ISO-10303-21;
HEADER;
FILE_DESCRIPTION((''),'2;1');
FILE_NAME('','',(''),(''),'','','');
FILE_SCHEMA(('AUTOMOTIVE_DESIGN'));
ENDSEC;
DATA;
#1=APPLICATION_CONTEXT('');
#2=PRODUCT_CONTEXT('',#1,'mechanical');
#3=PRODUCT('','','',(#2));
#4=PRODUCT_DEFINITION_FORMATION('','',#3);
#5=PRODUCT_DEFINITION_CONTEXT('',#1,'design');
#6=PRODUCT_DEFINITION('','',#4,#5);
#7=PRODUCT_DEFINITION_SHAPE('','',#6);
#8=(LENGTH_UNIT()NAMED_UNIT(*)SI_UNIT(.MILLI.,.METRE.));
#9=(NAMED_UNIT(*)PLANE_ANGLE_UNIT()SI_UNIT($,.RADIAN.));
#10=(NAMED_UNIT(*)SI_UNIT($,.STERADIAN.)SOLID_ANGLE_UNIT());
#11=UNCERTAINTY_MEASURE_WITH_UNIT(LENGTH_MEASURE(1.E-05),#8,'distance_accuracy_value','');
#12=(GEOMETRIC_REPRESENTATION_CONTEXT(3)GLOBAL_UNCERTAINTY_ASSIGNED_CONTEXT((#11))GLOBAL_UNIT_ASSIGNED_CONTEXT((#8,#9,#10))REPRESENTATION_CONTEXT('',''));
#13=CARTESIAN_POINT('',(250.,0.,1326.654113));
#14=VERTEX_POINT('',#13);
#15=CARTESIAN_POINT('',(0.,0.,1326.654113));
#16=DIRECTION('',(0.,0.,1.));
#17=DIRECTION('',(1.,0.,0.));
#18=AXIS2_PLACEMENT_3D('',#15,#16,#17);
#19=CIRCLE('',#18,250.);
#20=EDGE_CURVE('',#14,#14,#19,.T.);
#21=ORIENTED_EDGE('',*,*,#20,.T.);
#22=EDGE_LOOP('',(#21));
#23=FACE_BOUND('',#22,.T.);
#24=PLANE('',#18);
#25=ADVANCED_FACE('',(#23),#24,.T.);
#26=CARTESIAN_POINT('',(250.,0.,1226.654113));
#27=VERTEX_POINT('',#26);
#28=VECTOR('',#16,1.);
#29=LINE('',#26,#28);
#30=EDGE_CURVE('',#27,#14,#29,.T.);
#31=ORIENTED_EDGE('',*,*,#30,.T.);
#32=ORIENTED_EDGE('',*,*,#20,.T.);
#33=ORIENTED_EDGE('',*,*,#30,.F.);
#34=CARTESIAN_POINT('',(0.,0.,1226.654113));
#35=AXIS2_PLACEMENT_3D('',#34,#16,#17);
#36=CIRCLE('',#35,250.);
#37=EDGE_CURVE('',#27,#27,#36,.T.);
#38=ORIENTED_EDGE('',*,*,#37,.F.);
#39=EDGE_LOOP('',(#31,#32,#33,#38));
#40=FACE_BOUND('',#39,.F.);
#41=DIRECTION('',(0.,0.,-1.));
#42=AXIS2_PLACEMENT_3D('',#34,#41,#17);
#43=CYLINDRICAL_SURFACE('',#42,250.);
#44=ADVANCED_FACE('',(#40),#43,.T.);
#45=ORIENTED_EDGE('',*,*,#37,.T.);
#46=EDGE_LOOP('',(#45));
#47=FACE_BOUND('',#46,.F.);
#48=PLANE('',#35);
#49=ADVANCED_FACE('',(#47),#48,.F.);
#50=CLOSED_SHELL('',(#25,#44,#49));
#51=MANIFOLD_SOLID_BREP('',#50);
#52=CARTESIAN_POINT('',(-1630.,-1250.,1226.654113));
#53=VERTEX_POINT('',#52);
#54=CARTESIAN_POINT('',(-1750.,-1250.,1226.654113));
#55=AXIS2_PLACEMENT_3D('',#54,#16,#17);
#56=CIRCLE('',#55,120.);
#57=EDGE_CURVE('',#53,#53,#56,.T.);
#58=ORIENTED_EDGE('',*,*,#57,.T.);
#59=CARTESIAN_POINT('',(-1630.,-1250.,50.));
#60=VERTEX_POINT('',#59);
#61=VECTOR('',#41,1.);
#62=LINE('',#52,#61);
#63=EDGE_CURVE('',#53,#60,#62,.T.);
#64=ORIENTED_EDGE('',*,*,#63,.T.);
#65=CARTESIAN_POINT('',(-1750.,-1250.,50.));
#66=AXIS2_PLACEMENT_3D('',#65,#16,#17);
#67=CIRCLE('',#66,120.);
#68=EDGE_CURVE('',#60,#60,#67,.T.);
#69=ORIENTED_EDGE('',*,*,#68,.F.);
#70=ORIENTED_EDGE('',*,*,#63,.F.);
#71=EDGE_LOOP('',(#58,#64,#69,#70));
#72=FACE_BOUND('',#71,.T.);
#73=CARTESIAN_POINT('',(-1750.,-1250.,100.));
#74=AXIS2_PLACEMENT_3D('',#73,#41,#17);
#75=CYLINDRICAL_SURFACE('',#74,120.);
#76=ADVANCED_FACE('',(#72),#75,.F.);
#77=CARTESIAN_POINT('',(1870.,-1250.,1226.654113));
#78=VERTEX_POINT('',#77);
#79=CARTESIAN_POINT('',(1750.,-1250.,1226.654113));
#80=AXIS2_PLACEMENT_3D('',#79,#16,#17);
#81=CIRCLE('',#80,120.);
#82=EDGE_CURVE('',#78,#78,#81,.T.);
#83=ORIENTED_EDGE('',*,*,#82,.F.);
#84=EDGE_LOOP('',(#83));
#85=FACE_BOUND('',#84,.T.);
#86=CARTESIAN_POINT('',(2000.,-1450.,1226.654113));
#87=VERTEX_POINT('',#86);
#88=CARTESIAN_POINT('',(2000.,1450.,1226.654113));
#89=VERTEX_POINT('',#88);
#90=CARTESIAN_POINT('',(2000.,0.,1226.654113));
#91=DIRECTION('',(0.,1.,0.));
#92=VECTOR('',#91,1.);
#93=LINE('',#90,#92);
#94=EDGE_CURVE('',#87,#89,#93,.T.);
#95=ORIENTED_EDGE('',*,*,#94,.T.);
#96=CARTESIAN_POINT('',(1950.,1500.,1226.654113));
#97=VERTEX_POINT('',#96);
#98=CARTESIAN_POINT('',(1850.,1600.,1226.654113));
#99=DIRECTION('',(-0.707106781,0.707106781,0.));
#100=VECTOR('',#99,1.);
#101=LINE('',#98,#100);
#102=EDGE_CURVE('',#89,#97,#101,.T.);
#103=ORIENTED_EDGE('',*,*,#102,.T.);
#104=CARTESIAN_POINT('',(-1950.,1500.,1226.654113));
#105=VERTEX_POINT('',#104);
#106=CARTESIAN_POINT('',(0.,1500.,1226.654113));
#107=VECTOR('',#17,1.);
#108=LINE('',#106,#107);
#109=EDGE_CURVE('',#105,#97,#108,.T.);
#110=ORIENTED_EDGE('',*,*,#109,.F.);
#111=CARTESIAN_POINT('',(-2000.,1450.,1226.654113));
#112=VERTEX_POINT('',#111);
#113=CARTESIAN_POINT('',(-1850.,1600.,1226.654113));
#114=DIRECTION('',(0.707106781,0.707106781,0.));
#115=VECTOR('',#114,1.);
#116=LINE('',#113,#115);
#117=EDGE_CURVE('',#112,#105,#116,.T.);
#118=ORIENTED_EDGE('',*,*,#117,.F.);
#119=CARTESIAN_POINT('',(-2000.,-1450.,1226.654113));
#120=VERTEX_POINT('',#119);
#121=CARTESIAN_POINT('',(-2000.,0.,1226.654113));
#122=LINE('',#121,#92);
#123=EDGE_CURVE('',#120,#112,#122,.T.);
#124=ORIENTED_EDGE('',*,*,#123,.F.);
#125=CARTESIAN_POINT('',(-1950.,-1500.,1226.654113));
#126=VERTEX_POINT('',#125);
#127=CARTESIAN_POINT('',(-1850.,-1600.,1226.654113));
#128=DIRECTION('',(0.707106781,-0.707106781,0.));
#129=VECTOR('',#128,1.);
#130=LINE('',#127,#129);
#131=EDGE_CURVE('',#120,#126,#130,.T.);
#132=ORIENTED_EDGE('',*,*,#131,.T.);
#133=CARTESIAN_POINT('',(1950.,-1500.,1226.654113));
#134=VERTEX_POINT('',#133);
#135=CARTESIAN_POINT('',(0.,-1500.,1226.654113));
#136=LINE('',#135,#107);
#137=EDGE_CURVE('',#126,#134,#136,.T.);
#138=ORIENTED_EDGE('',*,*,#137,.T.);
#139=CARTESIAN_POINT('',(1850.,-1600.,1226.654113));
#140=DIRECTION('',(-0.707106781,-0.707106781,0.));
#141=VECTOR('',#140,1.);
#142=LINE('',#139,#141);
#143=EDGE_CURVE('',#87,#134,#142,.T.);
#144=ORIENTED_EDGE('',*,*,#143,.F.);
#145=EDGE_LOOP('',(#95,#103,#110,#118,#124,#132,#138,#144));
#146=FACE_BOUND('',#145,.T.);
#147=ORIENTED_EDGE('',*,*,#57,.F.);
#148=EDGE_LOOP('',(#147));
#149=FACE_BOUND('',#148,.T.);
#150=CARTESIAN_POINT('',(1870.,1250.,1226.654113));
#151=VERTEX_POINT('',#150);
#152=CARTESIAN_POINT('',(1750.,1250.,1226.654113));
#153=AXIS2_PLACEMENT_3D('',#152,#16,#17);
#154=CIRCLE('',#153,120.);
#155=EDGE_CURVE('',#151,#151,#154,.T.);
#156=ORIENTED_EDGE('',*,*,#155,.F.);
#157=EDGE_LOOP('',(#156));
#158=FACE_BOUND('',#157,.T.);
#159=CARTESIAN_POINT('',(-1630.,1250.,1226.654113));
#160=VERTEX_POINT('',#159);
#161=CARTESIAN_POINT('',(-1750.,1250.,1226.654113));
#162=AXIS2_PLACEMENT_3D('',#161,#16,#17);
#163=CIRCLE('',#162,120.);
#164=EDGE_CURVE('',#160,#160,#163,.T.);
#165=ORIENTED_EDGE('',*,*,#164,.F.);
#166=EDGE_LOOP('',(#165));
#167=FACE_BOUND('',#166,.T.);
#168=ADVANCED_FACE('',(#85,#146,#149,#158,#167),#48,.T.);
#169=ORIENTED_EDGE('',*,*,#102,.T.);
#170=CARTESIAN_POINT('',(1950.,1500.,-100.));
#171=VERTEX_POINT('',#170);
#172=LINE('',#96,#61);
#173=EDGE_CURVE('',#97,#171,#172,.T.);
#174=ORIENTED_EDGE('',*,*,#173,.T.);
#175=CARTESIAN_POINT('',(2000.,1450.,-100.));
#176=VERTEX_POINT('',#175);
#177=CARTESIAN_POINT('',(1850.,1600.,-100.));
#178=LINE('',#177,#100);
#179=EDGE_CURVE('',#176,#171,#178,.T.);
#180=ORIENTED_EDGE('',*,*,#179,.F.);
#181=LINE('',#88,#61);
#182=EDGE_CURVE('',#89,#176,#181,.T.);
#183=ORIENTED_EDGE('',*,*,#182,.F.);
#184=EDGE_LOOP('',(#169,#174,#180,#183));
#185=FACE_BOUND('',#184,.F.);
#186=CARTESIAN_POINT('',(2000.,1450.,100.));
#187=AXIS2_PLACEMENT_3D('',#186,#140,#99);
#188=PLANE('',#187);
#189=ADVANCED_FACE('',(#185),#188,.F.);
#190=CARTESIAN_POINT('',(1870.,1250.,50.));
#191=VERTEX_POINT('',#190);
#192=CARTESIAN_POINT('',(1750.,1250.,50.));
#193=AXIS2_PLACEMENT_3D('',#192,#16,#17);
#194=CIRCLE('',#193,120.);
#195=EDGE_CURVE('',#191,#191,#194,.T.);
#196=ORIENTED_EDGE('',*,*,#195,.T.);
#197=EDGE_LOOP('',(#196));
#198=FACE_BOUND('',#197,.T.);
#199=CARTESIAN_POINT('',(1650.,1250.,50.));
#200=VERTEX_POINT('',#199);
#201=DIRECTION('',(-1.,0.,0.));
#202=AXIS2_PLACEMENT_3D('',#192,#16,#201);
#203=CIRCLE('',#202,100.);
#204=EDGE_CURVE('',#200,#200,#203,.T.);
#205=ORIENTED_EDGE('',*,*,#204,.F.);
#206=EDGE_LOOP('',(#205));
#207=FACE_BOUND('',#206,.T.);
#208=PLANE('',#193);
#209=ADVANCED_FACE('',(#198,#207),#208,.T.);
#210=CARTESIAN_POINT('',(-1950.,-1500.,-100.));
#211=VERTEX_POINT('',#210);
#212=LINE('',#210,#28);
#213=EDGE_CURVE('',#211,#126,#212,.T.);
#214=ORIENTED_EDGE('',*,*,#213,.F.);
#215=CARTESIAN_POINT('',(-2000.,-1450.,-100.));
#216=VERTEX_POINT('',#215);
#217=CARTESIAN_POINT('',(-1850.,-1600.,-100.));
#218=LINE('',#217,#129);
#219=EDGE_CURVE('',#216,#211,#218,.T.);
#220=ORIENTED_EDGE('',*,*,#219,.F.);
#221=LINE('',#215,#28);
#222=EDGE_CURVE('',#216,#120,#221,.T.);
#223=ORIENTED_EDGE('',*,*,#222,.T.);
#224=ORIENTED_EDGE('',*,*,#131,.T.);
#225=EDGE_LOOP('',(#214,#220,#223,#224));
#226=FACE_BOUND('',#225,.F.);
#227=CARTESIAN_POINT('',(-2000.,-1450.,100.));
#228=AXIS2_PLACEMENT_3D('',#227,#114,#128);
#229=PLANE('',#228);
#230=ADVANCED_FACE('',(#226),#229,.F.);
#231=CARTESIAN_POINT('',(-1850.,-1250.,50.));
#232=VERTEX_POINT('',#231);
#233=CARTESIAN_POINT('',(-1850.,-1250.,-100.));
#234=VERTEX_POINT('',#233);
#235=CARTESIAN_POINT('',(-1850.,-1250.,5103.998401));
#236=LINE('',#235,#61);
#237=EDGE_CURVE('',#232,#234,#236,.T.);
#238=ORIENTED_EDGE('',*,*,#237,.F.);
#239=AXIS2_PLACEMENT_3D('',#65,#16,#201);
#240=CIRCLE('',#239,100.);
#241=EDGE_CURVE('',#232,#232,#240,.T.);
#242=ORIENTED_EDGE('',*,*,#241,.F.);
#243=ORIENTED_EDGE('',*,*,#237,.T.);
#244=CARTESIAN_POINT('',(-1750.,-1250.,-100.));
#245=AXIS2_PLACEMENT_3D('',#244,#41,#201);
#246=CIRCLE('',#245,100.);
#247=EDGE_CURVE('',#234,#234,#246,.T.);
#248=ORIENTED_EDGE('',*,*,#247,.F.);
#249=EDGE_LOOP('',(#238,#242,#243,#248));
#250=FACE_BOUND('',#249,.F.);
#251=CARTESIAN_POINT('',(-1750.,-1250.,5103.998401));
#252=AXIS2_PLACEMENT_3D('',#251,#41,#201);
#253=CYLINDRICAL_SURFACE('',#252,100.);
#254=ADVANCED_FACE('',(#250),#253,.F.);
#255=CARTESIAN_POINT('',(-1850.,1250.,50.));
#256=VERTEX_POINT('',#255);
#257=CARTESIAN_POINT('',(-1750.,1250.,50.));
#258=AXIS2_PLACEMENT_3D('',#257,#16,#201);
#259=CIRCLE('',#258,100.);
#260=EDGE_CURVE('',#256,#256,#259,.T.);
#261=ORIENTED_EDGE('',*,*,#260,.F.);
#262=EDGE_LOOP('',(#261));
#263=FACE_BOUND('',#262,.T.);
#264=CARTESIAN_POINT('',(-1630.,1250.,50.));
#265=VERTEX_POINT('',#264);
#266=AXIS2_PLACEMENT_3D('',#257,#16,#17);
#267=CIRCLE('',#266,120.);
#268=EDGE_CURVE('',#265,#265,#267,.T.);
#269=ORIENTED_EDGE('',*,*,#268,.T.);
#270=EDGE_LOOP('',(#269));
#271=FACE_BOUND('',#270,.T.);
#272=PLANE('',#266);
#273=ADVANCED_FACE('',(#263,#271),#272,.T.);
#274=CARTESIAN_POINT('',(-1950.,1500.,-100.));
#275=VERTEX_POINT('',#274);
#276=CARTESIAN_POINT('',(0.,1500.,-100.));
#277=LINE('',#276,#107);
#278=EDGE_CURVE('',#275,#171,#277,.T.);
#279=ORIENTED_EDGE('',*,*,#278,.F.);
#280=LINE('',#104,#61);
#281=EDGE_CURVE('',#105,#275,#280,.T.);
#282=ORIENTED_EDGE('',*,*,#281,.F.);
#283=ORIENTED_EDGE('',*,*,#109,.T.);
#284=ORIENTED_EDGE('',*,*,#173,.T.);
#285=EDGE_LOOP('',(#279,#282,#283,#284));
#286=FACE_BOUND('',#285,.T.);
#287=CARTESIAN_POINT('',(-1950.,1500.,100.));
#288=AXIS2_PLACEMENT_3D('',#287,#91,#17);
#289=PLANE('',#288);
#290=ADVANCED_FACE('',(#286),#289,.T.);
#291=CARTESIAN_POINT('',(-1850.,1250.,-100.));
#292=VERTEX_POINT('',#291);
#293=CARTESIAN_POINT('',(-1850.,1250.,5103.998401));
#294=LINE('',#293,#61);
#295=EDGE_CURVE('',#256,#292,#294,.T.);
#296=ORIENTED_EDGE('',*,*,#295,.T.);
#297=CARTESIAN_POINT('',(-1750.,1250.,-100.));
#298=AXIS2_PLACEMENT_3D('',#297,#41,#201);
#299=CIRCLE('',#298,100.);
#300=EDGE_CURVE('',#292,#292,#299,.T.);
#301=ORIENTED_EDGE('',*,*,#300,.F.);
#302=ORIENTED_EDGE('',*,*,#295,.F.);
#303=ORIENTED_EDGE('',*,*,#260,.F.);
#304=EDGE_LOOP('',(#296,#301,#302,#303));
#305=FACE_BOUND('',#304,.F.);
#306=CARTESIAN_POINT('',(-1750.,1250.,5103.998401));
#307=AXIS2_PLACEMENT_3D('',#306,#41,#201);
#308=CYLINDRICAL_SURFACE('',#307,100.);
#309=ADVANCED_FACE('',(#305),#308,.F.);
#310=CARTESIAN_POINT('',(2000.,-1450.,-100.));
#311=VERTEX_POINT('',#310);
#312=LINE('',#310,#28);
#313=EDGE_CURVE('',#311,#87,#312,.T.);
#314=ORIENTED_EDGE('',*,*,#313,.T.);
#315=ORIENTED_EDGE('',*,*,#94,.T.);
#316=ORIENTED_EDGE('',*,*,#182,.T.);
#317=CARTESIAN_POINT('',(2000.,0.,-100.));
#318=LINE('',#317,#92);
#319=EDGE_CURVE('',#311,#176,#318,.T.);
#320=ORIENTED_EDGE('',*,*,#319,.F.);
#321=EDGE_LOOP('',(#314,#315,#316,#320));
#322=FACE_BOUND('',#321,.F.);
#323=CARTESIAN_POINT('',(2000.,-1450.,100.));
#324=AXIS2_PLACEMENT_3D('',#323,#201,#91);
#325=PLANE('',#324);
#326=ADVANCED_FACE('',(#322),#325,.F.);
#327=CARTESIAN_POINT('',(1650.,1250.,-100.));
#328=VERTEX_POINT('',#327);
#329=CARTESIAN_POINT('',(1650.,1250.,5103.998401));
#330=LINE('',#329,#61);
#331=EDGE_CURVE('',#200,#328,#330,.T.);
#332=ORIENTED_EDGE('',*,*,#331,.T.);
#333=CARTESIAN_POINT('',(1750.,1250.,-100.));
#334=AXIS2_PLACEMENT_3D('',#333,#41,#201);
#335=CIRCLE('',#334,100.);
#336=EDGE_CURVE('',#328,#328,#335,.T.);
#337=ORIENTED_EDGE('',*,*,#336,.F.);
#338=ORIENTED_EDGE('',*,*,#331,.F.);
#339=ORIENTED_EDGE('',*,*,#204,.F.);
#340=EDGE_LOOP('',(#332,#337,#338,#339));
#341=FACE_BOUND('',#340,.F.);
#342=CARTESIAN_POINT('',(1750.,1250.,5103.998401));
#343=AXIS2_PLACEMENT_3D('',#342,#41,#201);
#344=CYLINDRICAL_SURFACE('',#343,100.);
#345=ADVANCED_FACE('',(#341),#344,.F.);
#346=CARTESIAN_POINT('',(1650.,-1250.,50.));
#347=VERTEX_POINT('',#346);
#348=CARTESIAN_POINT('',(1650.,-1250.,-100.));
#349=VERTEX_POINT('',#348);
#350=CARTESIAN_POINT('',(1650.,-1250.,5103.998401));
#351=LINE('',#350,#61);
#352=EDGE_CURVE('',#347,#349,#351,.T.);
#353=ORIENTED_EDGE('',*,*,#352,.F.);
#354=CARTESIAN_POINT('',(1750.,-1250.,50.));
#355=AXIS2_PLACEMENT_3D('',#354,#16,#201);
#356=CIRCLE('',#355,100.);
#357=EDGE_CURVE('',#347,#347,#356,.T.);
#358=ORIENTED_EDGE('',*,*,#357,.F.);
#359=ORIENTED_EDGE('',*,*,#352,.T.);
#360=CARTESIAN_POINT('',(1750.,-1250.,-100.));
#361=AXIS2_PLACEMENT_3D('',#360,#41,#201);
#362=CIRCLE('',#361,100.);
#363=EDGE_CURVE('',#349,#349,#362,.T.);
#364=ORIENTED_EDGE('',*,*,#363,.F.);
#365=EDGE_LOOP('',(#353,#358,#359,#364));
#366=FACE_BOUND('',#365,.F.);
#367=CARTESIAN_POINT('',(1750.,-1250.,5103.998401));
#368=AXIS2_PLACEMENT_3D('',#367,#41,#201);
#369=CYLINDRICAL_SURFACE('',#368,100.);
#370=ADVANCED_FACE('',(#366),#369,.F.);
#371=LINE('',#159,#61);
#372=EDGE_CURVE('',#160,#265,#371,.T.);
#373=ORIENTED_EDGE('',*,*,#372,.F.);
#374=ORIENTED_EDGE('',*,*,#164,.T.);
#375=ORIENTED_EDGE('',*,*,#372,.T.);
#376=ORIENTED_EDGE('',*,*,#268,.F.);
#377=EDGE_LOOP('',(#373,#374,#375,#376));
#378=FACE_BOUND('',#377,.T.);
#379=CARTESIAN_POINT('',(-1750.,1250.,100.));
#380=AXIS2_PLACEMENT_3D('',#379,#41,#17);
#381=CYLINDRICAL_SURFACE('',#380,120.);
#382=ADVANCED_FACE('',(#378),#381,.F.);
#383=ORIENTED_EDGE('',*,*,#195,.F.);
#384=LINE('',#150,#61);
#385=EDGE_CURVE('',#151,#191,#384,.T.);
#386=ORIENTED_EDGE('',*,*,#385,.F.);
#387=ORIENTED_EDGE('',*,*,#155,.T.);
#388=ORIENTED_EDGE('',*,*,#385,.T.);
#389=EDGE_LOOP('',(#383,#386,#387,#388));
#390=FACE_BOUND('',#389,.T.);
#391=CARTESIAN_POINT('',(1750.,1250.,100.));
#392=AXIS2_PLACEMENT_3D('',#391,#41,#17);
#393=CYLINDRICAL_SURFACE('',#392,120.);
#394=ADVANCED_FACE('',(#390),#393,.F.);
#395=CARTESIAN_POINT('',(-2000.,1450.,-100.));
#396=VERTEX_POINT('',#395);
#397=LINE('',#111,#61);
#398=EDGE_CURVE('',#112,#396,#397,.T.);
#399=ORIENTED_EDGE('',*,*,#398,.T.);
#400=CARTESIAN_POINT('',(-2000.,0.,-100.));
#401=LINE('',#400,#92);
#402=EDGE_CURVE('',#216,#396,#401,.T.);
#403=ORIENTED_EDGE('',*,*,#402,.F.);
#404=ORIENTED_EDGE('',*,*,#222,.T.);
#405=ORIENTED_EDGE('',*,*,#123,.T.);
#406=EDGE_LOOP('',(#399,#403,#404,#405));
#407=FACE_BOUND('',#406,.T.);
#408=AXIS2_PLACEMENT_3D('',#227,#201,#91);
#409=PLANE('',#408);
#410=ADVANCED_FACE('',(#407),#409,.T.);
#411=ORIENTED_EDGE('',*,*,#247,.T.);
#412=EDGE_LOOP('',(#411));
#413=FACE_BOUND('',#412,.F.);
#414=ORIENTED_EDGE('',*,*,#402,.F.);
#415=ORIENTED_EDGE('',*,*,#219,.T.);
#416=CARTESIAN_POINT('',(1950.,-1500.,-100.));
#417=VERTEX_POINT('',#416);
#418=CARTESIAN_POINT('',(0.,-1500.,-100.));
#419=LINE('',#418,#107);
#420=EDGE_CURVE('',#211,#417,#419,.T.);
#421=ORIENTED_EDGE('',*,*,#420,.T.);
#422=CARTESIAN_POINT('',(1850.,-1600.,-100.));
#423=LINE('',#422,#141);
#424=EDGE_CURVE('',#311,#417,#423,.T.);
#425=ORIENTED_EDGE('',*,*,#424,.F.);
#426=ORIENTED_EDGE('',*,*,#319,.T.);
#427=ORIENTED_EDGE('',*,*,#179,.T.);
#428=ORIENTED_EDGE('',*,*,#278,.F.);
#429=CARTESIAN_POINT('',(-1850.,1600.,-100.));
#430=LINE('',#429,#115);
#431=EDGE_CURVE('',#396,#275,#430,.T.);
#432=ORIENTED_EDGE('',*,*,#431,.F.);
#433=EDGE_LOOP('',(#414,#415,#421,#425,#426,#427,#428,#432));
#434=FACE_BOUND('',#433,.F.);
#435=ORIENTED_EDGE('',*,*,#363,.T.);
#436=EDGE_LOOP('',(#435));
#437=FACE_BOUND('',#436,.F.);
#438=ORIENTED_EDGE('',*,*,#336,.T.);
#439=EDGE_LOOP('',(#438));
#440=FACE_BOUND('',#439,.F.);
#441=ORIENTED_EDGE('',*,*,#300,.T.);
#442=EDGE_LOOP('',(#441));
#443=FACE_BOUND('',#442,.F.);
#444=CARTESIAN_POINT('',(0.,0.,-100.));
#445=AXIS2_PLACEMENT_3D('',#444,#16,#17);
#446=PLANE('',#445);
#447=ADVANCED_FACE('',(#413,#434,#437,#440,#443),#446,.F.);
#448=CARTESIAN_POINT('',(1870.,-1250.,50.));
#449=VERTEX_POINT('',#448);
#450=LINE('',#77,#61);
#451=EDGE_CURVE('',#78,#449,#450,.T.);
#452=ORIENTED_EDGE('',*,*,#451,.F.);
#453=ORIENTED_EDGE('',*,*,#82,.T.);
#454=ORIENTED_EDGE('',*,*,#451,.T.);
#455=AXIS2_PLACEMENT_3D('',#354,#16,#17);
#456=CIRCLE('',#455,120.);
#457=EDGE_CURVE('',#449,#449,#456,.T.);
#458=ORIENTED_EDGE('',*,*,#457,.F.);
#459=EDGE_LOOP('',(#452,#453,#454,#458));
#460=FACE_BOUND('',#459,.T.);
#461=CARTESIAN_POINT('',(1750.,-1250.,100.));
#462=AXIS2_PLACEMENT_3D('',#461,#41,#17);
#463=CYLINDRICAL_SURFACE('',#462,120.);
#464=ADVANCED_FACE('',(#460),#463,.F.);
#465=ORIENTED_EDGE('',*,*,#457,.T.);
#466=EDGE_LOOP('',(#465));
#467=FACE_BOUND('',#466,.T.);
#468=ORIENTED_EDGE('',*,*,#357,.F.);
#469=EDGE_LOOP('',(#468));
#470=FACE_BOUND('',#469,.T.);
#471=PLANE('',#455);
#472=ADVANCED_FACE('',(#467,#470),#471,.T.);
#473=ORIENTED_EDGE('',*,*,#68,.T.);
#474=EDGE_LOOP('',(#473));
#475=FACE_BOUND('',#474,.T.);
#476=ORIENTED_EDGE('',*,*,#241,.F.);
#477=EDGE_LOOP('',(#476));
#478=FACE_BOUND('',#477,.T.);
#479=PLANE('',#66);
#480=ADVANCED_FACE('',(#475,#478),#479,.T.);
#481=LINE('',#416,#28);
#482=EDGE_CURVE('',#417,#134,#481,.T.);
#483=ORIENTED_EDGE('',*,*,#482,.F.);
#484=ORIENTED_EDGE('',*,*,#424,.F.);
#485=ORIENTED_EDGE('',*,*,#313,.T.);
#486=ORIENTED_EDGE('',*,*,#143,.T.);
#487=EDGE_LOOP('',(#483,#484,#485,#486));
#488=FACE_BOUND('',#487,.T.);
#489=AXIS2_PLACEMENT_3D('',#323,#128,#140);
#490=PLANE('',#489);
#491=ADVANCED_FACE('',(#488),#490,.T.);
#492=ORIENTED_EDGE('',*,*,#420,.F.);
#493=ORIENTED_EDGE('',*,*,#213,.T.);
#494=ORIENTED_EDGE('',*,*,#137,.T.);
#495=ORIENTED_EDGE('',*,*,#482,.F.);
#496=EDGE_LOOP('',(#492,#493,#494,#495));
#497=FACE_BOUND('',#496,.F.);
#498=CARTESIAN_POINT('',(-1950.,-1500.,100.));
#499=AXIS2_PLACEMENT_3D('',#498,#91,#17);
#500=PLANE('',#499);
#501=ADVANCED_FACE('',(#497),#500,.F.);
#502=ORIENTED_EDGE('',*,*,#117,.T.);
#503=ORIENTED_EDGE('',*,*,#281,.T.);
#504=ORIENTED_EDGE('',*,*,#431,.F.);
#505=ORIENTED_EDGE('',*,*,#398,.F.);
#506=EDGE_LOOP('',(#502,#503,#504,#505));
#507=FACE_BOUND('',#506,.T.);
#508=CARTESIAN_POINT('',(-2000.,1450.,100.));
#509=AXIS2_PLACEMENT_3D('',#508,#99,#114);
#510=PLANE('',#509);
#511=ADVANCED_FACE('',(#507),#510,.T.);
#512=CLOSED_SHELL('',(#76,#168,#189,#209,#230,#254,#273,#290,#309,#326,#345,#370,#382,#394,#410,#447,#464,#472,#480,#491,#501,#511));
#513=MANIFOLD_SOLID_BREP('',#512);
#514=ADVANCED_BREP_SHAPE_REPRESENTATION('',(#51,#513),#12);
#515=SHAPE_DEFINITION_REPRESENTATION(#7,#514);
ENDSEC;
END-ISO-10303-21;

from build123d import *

# Parameters (mm, degrees)
F0_W      = 4000
F0_H      = 3000
F1_DEPTH  = 100
F2_SIZE   = 50
F4_D      = 200
F5_R      = 120
F5_R_2    = 100
F6_DEPTH  = 50
F7_DEPTH  = 1126.6541127115
F9_R      = 250
F10_DEPTH = 100


with BuildPart() as f1:
    # F0 (on Top) → F1 (new body, symmetric)
    with BuildSketch(Plane.XY):
        Rectangle(F0_W, F0_H)
    extrude(amount=F1_DEPTH, both=True)

    # F2
    f2_edges = [f1.edges().sort_by_distance(p)[0] for p in [
        (-2000, -1500, 0),
        (2000, 1500, 0),
        (2000, -1500, 0),
        (-2000, 1500, 0),
    ]]
    chamfer(f2_edges, length=F2_SIZE)

    # F4 (through all)
    with Locations(Plane.XY.offset(100)):
        with Locations((-1750, 1250), (1750, 1250), (-1750, -1250), (1750, -1250)):
            Hole(F4_D / 2)

    # F5 (on face) → F6 (cut)
    with BuildSketch(Plane.XY.offset(100)):
        with Locations((-1750, -1250)):
            Circle(F5_R)
        with Locations((-1750, -1250)):
            Circle(F5_R_2, mode=Mode.SUBTRACT)
        with Locations((-1750, 1250)):
            Circle(F5_R)
        with Locations((-1750, 1250)):
            Circle(F5_R_2, mode=Mode.SUBTRACT)
        with Locations((1750, 1250)):
            Circle(F5_R)
        with Locations((1750, 1250)):
            Circle(F5_R_2, mode=Mode.SUBTRACT)
        with Locations((1750, -1250)):
            Circle(F5_R)
        with Locations((1750, -1250)):
            Circle(F5_R_2, mode=Mode.SUBTRACT)
    extrude(amount=-F6_DEPTH, mode=Mode.SUBTRACT)

    # F7 (add): a face of the model
    f7_faces = [f1.faces().sort_by_distance(p)[0] for p in [
        (0, 0, 100),
    ]]
    extrude(f7_faces, amount=F7_DEPTH)


with BuildPart() as f10:
    # F9 (on face) → F10 (new body)
    with BuildSketch(Plane.XY.offset(1226.6541127115)):
        Circle(F9_R)
    extrude(amount=F10_DEPTH)


solid = Compound([f1.part, f10.part])
